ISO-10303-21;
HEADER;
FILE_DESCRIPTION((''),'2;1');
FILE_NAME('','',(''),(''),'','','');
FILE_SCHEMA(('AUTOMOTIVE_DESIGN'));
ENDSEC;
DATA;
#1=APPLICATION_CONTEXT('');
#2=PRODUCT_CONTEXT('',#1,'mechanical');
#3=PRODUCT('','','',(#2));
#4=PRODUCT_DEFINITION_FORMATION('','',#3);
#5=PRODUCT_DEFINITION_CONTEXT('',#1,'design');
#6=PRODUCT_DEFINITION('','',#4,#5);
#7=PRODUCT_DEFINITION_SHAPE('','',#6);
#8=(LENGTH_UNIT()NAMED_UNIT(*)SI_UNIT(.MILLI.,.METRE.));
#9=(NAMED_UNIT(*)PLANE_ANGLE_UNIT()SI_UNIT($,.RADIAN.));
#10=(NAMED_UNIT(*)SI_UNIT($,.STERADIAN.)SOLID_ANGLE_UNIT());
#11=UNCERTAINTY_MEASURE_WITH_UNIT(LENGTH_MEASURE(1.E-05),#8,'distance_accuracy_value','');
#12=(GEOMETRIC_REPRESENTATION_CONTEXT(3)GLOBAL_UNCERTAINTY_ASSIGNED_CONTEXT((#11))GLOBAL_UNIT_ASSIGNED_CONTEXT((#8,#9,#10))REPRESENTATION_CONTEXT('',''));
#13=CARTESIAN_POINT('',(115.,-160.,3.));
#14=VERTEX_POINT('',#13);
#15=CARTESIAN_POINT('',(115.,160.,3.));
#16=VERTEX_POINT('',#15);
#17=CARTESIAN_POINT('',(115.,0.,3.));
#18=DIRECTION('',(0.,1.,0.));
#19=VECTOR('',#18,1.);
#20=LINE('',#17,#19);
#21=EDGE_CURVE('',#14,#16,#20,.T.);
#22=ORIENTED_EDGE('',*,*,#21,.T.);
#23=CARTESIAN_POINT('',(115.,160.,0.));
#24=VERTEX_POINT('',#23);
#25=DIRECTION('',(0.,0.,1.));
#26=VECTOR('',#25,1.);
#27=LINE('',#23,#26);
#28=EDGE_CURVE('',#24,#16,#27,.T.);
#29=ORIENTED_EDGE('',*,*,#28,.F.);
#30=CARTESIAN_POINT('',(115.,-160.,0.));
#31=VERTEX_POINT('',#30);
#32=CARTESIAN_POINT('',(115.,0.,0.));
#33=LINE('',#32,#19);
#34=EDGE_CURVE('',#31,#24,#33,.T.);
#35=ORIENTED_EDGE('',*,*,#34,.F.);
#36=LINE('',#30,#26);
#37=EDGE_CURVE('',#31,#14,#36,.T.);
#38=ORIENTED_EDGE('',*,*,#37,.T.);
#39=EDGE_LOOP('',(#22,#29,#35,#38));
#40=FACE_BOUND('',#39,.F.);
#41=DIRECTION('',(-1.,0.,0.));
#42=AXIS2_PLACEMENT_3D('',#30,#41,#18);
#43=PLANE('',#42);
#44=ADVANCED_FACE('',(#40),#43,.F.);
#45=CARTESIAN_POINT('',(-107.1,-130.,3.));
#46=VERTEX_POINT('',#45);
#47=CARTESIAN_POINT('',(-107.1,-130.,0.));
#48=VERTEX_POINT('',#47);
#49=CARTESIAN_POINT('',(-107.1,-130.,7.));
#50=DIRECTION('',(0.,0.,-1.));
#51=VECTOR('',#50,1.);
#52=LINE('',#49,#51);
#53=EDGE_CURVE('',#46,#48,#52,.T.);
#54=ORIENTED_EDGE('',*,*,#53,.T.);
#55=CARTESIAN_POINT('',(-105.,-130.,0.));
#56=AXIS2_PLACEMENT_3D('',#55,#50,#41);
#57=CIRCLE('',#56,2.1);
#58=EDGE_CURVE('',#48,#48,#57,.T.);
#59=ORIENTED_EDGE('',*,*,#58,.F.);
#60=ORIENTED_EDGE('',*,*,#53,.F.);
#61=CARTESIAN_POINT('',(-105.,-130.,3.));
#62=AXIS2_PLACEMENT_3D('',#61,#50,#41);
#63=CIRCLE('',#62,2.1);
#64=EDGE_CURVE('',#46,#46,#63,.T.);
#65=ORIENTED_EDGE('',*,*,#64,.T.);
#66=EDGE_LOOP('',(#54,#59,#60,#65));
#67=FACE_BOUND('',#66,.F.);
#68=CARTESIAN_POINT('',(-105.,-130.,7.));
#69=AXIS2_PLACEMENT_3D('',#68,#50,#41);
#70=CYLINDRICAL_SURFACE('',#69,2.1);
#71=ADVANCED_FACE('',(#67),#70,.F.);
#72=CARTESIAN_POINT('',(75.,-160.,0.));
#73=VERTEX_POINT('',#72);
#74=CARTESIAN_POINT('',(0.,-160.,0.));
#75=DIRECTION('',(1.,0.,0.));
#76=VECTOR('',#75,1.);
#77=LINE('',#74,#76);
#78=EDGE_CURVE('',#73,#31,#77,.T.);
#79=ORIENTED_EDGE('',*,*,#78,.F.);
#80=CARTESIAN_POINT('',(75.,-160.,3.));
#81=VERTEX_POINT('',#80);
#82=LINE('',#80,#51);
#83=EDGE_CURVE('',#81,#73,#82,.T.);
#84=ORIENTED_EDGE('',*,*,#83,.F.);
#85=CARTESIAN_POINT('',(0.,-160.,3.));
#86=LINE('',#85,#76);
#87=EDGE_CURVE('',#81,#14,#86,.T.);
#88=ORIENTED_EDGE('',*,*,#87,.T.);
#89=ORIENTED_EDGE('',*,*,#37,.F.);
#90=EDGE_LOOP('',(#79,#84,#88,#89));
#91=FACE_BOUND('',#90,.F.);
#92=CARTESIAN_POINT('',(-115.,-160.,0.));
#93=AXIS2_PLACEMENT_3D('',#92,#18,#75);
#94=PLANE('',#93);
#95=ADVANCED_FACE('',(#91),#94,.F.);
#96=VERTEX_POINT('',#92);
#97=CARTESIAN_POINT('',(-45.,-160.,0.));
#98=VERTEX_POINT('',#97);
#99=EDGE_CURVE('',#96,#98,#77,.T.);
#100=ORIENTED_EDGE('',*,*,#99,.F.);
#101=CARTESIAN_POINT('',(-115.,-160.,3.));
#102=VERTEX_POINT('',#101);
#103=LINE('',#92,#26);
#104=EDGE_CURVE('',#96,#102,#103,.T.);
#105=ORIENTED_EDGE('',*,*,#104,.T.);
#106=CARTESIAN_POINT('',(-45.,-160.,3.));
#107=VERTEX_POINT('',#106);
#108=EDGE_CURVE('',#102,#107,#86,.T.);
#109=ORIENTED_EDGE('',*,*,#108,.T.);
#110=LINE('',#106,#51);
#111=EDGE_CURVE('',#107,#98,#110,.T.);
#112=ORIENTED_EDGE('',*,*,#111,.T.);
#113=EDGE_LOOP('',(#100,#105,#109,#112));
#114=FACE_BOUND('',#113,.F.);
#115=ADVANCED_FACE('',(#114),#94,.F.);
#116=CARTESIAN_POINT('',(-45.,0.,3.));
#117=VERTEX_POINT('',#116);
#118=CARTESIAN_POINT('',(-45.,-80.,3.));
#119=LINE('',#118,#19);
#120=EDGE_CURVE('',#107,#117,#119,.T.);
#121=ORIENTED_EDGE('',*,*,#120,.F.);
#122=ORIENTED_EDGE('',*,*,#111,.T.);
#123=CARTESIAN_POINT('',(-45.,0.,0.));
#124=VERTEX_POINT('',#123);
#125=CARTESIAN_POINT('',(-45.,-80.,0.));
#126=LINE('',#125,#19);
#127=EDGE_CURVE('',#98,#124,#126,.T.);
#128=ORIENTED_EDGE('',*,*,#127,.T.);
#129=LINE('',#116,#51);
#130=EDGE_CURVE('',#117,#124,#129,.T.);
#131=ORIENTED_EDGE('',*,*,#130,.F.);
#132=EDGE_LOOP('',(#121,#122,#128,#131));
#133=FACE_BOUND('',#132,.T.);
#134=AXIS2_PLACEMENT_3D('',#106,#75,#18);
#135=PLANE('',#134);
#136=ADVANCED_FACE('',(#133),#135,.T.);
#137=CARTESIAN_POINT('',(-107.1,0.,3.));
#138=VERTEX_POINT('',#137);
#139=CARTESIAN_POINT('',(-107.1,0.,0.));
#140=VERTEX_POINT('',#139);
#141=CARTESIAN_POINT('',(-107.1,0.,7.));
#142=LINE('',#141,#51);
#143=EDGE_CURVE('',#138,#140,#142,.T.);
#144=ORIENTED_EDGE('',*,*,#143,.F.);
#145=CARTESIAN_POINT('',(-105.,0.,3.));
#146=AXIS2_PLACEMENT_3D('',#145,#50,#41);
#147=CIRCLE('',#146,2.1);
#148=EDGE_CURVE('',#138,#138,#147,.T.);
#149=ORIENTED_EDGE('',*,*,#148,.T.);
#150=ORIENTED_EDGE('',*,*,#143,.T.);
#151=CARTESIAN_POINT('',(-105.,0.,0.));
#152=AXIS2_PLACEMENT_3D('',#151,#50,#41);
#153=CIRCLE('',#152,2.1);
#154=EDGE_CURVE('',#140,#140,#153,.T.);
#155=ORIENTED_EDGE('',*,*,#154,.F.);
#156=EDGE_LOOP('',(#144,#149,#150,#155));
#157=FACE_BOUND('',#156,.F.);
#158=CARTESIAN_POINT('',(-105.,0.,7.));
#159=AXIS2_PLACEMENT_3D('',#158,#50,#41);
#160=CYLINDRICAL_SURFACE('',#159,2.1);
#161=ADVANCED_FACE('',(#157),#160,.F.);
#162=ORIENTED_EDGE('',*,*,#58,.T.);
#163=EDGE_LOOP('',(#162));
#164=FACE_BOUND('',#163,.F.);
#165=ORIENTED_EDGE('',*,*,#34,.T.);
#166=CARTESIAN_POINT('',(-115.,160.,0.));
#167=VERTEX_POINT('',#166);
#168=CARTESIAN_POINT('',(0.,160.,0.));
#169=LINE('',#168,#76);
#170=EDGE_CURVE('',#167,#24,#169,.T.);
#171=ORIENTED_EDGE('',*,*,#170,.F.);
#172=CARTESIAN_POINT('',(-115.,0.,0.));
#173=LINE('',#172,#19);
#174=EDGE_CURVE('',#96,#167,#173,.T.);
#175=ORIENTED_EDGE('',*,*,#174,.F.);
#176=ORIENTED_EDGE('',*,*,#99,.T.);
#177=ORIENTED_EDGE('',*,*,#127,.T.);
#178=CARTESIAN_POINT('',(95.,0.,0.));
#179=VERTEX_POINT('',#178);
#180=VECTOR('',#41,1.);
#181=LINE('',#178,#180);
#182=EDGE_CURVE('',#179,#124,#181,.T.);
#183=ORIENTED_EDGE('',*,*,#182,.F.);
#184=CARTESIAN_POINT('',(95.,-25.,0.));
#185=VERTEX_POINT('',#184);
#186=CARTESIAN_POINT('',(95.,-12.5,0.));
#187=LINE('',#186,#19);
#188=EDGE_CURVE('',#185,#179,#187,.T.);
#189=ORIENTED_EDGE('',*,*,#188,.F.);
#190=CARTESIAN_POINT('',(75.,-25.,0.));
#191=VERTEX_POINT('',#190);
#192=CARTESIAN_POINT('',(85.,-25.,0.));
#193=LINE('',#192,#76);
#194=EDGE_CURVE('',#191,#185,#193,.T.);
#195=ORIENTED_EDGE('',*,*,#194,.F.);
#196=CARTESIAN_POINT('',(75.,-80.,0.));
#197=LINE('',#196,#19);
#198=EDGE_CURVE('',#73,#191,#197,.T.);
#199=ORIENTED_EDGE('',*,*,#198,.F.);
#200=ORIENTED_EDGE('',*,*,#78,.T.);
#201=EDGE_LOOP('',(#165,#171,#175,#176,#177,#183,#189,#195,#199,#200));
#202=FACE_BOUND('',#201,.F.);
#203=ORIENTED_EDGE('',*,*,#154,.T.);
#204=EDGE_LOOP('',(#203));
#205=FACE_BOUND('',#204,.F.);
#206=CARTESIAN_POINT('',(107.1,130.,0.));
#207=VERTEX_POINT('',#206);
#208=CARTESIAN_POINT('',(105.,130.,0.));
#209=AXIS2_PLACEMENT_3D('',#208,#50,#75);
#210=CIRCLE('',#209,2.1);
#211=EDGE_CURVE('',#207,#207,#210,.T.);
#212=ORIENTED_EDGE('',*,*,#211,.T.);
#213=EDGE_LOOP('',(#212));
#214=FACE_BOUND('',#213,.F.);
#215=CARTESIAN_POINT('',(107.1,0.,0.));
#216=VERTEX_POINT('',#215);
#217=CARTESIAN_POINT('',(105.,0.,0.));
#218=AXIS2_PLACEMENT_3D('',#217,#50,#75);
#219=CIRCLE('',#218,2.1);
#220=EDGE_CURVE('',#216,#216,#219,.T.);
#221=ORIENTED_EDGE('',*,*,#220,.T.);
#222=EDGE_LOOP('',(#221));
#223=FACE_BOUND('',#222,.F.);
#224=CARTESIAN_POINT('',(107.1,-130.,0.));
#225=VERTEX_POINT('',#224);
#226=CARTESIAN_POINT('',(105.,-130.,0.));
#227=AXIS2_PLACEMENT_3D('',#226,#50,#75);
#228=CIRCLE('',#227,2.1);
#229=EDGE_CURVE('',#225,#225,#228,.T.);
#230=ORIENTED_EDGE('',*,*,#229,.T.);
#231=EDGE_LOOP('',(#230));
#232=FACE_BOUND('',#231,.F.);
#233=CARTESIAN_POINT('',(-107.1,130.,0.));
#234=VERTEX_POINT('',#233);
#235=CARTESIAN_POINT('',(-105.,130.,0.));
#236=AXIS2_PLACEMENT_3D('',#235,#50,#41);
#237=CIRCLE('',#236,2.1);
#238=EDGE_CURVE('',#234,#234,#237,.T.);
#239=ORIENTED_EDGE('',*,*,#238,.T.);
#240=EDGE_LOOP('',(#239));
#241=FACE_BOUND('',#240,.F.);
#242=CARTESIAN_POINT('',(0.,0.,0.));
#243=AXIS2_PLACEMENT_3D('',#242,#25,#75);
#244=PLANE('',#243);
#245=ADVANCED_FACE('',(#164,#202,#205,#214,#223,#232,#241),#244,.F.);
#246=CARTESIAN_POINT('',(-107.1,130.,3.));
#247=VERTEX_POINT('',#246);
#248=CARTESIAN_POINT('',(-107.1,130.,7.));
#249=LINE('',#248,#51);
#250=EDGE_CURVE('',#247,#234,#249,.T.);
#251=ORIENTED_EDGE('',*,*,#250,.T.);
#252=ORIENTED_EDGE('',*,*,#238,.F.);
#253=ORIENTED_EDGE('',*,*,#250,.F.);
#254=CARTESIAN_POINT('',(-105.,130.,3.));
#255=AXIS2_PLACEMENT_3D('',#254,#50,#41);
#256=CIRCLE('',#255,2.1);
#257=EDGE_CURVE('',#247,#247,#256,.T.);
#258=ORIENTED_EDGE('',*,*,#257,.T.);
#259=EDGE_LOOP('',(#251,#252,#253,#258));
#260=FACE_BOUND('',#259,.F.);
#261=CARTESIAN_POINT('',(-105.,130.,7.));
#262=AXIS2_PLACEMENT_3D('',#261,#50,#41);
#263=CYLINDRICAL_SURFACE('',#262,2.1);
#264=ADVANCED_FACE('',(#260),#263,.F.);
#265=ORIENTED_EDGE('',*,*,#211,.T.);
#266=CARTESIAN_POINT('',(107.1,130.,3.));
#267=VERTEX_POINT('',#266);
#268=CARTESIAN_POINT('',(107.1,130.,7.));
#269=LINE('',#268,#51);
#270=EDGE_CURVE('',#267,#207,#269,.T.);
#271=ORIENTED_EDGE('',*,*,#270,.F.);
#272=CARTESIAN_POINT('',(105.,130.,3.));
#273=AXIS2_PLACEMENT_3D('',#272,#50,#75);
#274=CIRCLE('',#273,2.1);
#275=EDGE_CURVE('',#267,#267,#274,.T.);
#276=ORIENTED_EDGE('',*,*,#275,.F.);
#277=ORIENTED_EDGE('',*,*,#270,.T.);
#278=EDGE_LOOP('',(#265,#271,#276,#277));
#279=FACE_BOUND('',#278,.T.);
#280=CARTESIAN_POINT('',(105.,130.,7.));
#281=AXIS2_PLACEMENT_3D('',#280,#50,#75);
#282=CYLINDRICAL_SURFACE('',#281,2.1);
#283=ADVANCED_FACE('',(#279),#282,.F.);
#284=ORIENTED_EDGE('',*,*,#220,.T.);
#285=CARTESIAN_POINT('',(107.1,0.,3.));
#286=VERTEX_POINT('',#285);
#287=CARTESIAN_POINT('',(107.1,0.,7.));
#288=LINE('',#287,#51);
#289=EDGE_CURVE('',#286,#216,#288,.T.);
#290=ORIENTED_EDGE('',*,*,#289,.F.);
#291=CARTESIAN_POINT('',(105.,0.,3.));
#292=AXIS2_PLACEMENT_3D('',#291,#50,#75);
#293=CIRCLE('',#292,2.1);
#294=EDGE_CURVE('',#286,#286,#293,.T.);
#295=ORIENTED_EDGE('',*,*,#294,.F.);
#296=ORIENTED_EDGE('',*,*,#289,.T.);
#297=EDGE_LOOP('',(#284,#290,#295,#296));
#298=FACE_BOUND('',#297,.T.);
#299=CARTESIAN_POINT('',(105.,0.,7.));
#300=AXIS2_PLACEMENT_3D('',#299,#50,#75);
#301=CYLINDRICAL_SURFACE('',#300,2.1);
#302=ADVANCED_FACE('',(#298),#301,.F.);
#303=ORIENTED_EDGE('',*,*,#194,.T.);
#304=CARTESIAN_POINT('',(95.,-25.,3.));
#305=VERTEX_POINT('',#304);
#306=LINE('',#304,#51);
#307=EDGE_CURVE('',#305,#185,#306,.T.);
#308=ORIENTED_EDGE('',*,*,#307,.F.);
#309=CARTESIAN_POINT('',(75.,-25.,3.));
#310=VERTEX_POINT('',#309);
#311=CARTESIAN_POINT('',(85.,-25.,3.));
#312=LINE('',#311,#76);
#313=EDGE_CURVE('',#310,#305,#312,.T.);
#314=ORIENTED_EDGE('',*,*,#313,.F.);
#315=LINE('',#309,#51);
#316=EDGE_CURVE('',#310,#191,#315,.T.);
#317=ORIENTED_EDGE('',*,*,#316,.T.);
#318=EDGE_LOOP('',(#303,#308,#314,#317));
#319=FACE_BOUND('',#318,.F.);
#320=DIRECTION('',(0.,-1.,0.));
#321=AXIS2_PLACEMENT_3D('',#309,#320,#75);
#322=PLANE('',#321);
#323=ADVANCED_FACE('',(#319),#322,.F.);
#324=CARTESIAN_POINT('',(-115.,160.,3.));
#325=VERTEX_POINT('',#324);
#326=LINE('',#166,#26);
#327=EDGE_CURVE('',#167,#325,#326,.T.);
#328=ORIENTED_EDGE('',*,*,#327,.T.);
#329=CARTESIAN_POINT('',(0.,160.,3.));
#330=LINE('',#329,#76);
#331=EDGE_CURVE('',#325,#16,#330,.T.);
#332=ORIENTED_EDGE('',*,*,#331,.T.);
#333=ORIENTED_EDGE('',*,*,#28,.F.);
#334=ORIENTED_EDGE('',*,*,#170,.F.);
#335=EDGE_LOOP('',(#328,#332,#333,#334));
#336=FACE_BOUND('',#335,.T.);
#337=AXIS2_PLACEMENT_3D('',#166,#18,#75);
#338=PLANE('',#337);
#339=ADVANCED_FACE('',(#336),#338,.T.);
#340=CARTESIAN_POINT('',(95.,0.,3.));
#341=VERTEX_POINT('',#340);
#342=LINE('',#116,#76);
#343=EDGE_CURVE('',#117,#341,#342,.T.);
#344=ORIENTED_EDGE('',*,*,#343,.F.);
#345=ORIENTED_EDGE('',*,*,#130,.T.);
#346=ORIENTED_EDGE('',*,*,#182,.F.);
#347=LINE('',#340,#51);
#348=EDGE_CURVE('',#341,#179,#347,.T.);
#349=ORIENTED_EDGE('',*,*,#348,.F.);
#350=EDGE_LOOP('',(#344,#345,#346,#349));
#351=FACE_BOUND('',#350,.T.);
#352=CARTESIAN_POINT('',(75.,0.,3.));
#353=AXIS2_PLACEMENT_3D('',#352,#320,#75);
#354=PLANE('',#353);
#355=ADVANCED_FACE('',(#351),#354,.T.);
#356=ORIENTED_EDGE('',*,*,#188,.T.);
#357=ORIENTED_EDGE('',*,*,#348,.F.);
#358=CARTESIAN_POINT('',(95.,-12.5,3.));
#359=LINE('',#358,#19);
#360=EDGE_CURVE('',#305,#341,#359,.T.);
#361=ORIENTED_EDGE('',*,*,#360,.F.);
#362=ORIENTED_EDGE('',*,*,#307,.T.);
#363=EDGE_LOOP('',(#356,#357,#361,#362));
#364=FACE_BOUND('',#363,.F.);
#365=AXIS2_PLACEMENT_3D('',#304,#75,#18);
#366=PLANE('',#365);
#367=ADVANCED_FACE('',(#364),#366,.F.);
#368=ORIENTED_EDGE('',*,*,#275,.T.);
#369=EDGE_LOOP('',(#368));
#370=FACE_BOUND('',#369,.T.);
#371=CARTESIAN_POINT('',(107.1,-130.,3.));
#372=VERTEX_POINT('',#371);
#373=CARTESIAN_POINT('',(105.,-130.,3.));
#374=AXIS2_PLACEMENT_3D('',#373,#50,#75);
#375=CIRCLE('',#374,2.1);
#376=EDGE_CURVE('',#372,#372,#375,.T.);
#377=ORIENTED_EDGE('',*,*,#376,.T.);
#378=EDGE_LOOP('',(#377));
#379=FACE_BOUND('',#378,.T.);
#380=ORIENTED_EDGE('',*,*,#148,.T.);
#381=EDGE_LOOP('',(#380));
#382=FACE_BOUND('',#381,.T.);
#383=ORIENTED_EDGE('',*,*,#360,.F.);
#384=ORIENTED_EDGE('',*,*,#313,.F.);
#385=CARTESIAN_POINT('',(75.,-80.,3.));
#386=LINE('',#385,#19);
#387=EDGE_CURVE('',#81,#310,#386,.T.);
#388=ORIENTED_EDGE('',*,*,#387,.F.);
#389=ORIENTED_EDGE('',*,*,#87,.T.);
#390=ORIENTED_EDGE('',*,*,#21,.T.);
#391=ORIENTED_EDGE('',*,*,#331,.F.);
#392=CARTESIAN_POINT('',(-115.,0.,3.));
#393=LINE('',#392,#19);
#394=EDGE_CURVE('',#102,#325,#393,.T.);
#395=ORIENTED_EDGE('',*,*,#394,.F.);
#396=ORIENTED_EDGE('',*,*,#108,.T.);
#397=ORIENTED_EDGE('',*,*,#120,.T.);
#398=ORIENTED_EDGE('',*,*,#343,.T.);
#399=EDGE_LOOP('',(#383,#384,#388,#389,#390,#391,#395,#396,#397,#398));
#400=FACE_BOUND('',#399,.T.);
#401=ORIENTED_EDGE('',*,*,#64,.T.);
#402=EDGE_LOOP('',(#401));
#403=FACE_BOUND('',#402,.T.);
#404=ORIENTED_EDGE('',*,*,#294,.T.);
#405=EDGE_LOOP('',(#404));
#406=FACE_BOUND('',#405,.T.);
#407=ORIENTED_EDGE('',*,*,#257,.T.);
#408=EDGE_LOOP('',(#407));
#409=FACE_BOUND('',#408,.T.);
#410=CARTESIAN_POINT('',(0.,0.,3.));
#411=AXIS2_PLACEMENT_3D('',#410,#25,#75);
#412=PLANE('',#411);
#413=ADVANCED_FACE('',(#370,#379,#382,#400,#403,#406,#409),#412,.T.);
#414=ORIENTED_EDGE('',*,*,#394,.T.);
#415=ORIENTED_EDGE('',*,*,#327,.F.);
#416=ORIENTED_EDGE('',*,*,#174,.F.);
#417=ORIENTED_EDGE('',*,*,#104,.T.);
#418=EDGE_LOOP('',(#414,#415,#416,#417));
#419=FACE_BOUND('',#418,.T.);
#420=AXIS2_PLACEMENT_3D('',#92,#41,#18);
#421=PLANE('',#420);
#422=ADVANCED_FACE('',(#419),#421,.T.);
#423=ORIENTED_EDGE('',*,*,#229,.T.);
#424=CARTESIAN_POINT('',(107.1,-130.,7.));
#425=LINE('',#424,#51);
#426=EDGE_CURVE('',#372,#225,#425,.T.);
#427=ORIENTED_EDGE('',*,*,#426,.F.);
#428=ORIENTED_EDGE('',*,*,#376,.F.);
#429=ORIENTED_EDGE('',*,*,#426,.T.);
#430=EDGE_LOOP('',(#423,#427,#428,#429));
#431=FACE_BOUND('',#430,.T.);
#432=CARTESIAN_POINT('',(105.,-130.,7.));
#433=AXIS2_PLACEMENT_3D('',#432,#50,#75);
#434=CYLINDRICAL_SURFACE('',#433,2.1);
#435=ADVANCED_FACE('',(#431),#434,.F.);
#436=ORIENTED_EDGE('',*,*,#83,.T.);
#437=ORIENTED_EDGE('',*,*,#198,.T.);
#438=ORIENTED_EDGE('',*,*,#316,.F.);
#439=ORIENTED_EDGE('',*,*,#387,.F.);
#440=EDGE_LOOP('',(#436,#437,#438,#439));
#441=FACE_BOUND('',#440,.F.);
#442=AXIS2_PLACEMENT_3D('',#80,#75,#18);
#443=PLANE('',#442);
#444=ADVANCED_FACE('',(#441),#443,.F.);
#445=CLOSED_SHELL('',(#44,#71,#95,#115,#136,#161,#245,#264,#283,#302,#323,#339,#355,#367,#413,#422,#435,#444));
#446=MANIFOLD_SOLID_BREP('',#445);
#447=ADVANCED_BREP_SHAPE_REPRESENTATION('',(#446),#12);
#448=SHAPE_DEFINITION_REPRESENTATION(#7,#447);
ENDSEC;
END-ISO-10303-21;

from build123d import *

# Parameters (mm, degrees)
F1_W     = 230
F1_H     = 320
F2_DEPTH = 3
F4_D     = 4.2
F4_DEPTH = 4
F4_TIP   = 1.2618073
F5_W     = 120
F5_H     = 160
F6_DEPTH = 25
F7_W     = 20
F7_H     = 25
F8_DEPTH = 3


# Not quite as in the source:
# - a pattern or mirror of a feature is missing from the dataset's text; its kind, count and spacing are read off the source's solid


with BuildPart() as f2:
    # F1 (on Top) → F2 (new body)
    with BuildSketch(Plane.XY):
        Rectangle(F1_W, F1_H)
    extrude(amount=F2_DEPTH)

    # F4
    with Locations(Plane.XY.offset(3)):
        with Locations((-105, 130), (-105, 0), (-105, -130)):
            f4 = Hole(F4_D / 2, depth=F4_DEPTH)
            with Locations((0, 0, -(F4_DEPTH + F4_TIP / 2))):  # 118° drill point
                Cone(0, F4_D / 2, F4_TIP, mode=Mode.SUBTRACT)

    # F4_copies: F4 across plane
    add(f4.mirror(Plane(origin=(0, 0, 0), x_dir=(0, 0, 1), z_dir=(1, 0, 0))), mode=Mode.SUBTRACT)

    # F5 (on face) → F6 (cut)
    with BuildSketch(Plane.XY.offset(3)):
        with Locations((15, -80)):
            Rectangle(F5_W, F5_H)
    extrude(amount=-F6_DEPTH, mode=Mode.SUBTRACT)

    # F7 (on face) → F8 (cut, through all)
    with BuildSketch(Plane.XY.offset(3)):
        with Locations((85, -12.5)):
            Rectangle(F7_W, F7_H)
    extrude(amount=-F8_DEPTH, mode=Mode.SUBTRACT)


solid = f2.part
